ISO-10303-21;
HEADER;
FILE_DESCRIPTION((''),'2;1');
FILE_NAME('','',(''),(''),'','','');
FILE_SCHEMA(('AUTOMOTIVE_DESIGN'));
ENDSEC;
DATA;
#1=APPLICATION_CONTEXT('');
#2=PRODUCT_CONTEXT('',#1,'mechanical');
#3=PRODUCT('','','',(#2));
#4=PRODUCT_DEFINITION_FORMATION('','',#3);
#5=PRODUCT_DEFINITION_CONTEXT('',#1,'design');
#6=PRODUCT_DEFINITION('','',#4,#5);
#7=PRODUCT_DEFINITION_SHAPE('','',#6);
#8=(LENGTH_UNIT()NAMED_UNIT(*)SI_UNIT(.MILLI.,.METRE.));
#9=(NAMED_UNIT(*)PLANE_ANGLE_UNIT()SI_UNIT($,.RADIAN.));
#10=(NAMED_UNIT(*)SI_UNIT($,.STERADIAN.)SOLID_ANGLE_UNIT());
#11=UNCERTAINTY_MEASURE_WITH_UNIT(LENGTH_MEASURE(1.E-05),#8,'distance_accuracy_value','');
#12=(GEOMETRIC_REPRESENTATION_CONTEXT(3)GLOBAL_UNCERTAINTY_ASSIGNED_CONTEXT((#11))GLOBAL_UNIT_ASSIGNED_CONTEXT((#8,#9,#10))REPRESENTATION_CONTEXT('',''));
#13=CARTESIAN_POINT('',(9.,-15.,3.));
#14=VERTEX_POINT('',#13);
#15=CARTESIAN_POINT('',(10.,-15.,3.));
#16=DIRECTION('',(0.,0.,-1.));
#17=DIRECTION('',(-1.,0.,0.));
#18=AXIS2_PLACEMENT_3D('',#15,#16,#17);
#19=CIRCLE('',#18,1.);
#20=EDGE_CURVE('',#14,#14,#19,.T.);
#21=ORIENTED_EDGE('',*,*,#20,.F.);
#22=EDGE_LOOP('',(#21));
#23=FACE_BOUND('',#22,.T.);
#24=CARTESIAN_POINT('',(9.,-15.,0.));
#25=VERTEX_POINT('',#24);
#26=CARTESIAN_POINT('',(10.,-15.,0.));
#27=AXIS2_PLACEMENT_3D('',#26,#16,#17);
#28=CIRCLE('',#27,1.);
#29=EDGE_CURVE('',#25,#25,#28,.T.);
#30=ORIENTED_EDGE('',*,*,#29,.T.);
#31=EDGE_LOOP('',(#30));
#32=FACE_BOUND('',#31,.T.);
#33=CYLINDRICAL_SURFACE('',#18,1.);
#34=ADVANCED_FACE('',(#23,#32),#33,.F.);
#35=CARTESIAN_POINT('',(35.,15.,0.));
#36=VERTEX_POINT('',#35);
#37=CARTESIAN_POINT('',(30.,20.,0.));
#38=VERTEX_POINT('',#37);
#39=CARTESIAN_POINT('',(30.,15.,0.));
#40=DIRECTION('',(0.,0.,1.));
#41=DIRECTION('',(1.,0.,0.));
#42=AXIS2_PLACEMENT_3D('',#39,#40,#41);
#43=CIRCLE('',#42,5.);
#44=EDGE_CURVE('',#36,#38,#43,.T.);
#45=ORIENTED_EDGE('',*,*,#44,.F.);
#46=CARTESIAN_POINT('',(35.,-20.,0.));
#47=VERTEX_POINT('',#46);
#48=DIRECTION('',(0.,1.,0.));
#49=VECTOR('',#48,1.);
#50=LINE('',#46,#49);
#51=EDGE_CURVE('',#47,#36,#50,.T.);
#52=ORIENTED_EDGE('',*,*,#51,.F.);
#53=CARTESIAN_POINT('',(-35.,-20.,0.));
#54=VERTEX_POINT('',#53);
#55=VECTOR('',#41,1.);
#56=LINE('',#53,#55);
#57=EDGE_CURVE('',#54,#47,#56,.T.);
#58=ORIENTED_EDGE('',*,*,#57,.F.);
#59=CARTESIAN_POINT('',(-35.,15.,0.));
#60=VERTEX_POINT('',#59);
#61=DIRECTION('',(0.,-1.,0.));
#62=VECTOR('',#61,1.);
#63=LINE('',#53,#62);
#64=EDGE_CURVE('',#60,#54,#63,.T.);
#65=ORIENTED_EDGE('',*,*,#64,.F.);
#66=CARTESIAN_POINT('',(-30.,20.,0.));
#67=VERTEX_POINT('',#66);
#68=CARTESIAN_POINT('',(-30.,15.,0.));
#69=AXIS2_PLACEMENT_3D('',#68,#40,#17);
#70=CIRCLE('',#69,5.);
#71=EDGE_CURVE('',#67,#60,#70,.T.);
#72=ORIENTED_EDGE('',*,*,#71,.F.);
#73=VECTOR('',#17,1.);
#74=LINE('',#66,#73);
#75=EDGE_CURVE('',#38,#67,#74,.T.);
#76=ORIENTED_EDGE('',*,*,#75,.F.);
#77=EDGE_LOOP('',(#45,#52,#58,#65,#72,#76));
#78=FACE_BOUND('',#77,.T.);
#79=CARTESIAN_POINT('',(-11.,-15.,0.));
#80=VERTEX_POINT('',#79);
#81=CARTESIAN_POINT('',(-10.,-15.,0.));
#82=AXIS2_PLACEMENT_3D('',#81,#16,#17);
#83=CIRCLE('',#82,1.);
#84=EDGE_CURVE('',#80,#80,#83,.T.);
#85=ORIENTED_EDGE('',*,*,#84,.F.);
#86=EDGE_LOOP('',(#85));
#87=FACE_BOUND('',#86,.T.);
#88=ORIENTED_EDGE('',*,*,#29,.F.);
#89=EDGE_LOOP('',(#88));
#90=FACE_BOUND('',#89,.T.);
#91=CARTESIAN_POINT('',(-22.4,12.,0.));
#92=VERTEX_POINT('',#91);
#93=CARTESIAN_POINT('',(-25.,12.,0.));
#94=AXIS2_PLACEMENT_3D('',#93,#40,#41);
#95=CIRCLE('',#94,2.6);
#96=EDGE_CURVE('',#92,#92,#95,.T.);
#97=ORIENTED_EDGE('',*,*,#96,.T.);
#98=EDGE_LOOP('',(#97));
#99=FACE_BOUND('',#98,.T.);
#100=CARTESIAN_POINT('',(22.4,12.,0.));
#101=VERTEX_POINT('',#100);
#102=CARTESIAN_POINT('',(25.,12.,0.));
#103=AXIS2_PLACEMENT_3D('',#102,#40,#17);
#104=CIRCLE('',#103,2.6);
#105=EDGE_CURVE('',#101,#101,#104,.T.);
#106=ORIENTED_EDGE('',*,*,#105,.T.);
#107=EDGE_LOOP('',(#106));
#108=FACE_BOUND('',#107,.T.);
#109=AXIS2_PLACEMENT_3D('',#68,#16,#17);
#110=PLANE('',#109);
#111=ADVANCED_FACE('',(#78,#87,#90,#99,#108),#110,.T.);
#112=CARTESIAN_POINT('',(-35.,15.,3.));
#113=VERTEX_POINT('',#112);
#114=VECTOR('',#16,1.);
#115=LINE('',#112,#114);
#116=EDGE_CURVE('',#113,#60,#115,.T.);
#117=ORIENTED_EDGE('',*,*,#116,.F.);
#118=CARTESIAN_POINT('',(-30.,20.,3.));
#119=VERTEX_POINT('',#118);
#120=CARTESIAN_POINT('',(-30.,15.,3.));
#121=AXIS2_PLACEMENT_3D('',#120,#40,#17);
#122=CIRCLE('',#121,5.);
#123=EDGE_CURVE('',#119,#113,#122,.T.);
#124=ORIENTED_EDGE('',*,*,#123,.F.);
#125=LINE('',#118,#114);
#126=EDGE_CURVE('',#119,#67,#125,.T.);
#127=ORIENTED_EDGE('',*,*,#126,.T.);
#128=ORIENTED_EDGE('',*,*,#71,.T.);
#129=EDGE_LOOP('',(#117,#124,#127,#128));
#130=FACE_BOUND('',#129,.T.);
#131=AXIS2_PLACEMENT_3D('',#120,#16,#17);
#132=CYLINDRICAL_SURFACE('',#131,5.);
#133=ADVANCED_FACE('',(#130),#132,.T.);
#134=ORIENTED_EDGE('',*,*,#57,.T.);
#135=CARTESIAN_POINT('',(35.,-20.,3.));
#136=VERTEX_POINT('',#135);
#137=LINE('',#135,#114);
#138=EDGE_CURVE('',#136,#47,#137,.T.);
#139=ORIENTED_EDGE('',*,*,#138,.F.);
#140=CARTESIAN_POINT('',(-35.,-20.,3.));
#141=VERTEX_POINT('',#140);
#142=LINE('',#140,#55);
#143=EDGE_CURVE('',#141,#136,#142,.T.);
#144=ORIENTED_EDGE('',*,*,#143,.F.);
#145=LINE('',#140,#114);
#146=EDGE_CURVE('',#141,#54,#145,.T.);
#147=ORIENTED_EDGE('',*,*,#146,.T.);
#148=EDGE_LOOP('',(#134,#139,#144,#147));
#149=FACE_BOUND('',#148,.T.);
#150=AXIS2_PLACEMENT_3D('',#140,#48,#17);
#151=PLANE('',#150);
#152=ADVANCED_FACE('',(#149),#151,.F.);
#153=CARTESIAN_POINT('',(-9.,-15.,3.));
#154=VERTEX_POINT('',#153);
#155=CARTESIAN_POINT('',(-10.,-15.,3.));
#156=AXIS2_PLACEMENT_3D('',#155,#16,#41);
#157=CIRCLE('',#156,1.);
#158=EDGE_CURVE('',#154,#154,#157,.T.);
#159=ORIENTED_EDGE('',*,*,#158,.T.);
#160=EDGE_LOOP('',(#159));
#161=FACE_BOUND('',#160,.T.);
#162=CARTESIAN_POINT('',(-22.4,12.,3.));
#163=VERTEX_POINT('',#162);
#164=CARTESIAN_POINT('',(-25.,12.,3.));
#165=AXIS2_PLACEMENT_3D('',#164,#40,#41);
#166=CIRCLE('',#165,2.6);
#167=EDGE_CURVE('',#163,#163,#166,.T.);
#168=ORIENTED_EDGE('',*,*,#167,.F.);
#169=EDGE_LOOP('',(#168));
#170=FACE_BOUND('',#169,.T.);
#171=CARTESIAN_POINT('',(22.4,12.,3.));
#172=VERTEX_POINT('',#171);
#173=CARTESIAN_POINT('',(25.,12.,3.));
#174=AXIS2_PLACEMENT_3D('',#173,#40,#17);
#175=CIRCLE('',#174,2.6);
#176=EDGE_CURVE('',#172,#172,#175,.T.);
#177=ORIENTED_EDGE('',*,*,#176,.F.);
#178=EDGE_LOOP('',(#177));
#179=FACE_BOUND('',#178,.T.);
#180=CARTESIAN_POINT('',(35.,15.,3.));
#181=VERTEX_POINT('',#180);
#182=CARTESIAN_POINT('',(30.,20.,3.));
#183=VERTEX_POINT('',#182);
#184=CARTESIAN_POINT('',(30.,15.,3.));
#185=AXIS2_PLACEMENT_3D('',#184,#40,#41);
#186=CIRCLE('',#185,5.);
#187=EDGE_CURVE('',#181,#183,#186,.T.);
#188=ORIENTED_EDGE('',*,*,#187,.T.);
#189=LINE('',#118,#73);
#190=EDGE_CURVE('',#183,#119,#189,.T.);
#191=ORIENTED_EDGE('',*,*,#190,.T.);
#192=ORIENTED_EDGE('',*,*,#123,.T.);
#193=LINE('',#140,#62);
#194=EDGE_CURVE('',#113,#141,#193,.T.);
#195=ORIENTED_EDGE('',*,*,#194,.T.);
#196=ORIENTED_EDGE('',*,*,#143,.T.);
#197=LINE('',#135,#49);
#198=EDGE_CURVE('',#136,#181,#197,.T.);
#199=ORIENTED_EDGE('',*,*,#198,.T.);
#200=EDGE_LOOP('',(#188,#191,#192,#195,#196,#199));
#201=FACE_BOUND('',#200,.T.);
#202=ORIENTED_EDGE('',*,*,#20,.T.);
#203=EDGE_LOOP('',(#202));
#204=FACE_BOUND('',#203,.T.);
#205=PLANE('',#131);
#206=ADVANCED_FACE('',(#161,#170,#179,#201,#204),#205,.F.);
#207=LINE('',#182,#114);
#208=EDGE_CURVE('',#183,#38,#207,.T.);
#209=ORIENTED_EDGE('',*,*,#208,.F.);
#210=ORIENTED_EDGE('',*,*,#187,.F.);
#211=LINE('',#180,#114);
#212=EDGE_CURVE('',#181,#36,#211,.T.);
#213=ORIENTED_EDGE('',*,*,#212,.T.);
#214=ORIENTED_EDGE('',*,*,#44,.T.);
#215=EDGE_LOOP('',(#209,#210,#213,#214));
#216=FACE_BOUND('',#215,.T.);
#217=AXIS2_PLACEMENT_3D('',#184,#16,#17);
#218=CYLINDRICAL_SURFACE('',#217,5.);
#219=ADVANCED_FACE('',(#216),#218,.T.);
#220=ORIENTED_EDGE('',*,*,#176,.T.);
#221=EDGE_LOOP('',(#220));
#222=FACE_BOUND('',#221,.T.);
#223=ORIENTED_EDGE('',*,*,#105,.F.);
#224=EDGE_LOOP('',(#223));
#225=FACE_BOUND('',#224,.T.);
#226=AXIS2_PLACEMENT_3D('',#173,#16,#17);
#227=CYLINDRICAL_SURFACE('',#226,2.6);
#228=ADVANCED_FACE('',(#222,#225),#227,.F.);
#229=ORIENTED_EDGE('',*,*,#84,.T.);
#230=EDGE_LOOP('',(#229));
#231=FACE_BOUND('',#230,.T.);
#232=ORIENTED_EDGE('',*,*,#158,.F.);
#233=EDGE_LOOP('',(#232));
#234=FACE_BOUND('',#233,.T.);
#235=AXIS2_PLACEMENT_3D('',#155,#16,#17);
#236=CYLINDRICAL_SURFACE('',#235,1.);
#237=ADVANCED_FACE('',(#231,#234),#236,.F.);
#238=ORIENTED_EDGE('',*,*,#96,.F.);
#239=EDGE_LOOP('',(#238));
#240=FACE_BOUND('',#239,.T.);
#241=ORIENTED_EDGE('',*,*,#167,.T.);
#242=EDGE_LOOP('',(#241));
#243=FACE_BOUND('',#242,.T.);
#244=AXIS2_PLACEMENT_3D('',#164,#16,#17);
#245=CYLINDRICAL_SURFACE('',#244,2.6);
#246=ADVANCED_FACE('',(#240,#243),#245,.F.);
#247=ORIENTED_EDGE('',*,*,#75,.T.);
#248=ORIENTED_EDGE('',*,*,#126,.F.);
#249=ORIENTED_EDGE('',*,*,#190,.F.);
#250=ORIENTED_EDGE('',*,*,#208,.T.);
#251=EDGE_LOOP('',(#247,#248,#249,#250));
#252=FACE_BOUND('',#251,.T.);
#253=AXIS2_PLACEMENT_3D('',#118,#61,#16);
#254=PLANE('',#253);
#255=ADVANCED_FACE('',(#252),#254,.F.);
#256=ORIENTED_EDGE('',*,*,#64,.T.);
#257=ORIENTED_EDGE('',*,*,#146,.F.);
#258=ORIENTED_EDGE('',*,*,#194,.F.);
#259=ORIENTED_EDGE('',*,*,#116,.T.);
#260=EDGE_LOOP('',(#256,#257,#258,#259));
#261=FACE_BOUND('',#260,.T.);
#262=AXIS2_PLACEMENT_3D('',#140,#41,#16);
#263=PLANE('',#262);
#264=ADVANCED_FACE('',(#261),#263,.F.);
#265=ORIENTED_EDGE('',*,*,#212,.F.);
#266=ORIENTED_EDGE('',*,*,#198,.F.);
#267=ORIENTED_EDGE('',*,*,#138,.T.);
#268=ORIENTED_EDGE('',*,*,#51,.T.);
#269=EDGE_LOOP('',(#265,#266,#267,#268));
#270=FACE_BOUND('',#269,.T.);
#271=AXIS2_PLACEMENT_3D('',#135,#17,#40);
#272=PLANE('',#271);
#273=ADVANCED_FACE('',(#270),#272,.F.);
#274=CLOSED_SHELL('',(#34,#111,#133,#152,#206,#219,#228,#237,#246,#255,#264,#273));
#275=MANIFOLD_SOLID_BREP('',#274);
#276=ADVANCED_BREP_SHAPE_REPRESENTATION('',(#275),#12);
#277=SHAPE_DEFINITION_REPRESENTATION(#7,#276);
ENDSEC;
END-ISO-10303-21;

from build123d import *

# Parameters (mm, degrees)
SKETCH_1_R               = 2.6
EXTRUDE_1_DEPTH          = 3
CUT_EXTRUDE_1_DEPTH      = 41.422765863
CUT_EXTRUDE_1_DEPTH_BACK = 41.422765863
SKETCH_2_R               = 1


with BuildPart() as part:
    # Sketch 1 → 凸台-拉伸1 (new body)
    with BuildSketch(Plane.XY):
        with BuildLine():
            Line((-35, -20), (35, -20))
            Line((35, -20), (35, 15))
            ThreePointArc((35, 15), (33.535533906, 18.535533906), (30, 20))
            Line((30, 20), (-30, 20))
            ThreePointArc((-30, 20), (-33.535533906, 18.535533906), (-35, 15))
            Line((-35, 15), (-35, -20))
        make_face()
        with Locations((-25, 12)):
            Circle(SKETCH_1_R, mode=Mode.SUBTRACT)
        with Locations(Location((25, 12, 0), (0, 0, 180))):
            Circle(SKETCH_1_R, mode=Mode.SUBTRACT)
    extrude(amount=EXTRUDE_1_DEPTH)

    # Sketch 2 → 切除-拉伸1 (cut, two sides: drawn at the far end of the back side and taken through both)
    with BuildSketch(Plane(origin=(0, 0, 0), x_dir=(-1, 0, 0), z_dir=(0, 0, -1)).offset(-CUT_EXTRUDE_1_DEPTH_BACK)):
        with Locations((-10, -15)):
            Circle(SKETCH_2_R)
        with Locations((10, -15)):
            Circle(SKETCH_2_R)
    extrude(amount=CUT_EXTRUDE_1_DEPTH + CUT_EXTRUDE_1_DEPTH_BACK, mode=Mode.SUBTRACT)


solid = part.part
